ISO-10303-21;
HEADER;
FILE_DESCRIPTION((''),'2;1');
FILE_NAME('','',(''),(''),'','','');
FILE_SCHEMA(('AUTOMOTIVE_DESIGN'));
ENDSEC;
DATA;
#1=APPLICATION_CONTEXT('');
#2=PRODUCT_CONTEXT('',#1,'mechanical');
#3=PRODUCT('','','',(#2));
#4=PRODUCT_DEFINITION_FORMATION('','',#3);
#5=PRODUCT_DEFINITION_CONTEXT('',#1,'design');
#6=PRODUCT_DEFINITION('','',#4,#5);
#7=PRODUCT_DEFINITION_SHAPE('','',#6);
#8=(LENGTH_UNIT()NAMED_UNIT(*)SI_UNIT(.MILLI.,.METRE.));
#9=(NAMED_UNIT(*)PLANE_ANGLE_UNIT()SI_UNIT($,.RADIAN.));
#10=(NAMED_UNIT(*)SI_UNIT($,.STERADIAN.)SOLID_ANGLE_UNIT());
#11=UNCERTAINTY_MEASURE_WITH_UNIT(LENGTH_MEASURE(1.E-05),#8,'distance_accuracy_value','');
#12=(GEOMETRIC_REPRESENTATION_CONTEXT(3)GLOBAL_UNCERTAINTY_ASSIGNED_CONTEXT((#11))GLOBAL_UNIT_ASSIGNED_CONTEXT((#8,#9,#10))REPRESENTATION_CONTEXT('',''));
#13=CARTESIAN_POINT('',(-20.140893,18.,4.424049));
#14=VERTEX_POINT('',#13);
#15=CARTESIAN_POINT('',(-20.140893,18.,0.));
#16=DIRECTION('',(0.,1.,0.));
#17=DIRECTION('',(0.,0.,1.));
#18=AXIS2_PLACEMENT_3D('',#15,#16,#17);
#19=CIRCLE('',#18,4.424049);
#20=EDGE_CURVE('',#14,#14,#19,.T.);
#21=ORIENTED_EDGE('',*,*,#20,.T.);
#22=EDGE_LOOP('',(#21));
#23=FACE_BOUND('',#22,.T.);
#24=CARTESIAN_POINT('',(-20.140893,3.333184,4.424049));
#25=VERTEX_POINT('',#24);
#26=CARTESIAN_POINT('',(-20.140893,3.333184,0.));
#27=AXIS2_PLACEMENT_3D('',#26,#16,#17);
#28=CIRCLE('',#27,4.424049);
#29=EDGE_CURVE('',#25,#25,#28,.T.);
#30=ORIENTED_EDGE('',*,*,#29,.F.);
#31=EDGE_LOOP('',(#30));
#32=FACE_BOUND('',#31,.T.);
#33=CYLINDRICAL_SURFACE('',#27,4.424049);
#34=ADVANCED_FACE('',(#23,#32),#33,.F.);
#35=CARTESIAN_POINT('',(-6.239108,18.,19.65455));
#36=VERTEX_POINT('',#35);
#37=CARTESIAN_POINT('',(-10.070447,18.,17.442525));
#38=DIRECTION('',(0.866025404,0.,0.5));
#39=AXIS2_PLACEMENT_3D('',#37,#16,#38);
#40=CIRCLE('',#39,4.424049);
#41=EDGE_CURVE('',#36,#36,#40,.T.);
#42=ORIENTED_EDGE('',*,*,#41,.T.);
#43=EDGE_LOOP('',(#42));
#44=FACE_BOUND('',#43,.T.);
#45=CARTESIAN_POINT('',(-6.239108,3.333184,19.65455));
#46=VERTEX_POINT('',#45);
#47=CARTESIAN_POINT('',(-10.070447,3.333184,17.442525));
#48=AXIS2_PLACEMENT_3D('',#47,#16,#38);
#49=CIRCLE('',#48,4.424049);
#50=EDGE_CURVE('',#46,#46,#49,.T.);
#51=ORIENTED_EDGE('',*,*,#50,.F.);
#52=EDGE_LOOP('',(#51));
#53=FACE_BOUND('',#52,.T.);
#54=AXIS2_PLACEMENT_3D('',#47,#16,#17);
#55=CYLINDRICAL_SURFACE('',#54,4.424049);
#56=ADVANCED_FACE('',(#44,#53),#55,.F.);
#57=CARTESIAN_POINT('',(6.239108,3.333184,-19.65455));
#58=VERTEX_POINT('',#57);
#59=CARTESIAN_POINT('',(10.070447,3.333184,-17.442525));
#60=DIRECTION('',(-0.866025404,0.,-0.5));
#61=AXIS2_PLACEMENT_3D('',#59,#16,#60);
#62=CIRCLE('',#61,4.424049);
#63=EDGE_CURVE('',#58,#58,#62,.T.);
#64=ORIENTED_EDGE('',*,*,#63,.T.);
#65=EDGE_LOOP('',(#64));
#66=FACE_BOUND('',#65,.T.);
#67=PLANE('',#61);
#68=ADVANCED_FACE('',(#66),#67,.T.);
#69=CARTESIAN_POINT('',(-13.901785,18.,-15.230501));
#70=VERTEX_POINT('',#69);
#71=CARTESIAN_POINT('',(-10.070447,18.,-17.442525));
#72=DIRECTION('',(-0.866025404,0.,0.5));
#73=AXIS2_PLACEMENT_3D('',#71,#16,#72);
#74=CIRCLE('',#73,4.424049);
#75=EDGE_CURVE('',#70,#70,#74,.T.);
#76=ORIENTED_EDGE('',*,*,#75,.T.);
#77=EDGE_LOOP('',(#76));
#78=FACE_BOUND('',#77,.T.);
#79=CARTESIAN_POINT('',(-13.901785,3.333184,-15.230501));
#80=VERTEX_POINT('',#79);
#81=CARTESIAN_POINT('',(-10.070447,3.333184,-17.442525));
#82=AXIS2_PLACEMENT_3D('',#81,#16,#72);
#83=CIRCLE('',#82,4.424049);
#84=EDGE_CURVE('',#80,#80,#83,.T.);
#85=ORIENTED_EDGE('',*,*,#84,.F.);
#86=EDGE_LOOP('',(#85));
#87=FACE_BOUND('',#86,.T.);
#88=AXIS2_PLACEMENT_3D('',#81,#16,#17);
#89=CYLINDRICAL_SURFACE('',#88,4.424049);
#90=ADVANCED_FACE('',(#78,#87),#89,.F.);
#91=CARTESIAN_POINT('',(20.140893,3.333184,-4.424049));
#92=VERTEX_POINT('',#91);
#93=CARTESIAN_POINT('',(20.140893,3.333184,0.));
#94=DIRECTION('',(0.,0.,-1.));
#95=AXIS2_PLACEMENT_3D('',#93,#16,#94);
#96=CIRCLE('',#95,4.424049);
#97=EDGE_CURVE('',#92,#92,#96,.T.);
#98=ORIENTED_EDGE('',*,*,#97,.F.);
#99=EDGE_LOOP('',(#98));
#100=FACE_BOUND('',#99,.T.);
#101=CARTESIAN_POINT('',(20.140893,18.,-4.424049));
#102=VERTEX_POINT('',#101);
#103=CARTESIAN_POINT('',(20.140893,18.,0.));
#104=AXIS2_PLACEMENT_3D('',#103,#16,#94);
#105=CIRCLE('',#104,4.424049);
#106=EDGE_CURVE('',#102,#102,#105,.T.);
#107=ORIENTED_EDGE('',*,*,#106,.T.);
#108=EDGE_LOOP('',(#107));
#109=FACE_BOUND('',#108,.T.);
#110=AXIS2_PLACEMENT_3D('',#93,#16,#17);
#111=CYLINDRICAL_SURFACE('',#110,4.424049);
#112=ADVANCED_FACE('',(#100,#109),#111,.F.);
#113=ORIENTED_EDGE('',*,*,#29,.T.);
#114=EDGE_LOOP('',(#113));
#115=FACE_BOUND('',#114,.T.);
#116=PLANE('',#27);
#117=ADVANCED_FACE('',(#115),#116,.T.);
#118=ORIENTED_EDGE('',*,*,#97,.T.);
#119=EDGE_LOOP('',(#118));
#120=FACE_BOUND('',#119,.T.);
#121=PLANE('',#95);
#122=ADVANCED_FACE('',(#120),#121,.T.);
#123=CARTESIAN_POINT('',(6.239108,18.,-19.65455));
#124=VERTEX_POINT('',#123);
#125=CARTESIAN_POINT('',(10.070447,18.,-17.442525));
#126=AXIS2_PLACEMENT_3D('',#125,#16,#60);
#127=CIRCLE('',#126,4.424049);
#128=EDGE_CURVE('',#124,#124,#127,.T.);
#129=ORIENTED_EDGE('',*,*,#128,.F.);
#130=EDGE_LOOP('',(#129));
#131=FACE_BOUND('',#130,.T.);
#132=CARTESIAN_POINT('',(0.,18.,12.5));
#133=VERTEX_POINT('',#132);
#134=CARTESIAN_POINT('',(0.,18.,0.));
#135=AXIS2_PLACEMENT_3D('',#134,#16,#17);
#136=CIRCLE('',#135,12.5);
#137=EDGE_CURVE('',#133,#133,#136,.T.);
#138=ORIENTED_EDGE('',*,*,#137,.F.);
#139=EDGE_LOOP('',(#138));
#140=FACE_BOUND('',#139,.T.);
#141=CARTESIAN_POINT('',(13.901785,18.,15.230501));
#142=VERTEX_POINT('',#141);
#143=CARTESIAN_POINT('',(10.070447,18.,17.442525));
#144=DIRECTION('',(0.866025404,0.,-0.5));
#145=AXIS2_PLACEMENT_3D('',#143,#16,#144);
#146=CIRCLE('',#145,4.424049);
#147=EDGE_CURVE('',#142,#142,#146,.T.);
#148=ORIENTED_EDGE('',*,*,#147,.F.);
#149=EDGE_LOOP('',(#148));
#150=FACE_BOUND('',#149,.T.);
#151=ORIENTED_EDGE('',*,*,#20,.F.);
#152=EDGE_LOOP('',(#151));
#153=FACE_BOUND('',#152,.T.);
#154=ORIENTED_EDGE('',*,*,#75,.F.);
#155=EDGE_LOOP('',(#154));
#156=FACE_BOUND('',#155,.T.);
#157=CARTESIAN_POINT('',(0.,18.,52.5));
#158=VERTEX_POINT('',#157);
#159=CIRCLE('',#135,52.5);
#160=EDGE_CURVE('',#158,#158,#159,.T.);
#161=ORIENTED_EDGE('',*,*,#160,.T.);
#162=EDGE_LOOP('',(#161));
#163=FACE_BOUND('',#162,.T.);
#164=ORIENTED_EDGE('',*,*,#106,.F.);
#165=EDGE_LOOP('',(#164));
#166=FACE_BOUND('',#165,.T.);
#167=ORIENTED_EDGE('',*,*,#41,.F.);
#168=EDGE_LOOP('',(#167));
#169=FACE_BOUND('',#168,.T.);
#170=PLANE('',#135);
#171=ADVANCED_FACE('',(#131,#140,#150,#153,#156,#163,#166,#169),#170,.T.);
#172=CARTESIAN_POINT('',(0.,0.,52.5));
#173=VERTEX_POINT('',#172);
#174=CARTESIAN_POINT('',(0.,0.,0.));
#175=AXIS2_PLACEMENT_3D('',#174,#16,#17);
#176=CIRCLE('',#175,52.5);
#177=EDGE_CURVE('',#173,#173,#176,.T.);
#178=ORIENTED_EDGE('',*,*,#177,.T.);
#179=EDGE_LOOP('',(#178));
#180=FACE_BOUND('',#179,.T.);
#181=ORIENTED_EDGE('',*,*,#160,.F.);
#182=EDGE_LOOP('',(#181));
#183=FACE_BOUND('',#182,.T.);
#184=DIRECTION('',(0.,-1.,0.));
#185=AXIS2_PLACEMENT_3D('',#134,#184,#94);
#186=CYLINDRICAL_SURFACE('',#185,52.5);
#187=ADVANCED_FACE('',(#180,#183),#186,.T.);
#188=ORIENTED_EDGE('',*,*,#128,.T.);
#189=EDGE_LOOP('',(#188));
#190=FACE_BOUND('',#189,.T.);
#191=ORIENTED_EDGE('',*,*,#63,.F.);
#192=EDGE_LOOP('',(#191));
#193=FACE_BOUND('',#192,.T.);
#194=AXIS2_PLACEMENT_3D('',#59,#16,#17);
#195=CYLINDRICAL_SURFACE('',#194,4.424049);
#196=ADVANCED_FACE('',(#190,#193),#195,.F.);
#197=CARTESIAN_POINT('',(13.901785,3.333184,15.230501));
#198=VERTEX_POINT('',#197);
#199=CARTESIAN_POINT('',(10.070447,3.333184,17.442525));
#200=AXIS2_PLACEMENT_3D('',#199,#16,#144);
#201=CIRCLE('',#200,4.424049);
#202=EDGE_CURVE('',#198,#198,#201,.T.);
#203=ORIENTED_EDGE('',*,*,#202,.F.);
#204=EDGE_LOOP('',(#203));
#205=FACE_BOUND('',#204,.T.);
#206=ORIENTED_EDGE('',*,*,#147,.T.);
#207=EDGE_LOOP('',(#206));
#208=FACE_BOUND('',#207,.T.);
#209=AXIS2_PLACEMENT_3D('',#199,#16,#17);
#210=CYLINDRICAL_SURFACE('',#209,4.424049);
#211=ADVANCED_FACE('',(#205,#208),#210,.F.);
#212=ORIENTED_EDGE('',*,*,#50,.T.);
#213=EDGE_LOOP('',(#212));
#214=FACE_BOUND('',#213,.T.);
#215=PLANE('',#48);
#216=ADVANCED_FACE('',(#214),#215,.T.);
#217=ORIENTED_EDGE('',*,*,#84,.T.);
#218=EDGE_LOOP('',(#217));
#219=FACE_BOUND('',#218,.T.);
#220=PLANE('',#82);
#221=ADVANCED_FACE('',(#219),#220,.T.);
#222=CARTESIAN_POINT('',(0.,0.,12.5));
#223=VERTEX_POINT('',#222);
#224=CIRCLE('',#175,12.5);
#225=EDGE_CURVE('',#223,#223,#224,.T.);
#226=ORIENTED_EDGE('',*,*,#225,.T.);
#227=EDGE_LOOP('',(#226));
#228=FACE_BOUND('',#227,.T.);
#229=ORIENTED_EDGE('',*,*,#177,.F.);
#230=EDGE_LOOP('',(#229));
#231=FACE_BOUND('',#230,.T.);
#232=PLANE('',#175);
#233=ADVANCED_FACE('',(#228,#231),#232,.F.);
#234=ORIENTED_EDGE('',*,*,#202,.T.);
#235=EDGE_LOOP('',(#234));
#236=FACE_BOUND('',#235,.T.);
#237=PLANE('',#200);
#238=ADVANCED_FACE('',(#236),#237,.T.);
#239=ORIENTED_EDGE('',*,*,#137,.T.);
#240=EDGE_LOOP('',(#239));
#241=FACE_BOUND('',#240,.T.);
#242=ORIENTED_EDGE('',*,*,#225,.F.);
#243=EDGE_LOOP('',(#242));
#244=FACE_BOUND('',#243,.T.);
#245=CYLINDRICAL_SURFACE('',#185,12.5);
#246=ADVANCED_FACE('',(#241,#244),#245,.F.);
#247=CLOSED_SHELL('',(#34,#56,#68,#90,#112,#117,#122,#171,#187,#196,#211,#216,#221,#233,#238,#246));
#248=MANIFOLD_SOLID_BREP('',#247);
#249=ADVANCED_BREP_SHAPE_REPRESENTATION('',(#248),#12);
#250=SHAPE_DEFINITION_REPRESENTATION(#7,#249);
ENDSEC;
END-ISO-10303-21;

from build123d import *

# Parameters (mm, degrees)
SKETCH1_R           = 52.5
BOSS_EXTRUDE1_DEPTH = 18
SKETCH2_R           = 12.5
CUT_EXTRUDE1_DEPTH  = 77.396989469
SKETCH3_R           = 4.424048946
CUT_EXTRUDE2_DEPTH  = 14.666816431
CIRPATTERN1_COUNT   = 6


with BuildPart() as part:
    # Sketch1 → Boss-Extrude1 (new body)
    with BuildSketch(Plane(origin=(0, 0, 0), x_dir=(1, 0, 0), z_dir=(0, 1, 0))):
        Circle(SKETCH1_R)
    extrude(amount=BOSS_EXTRUDE1_DEPTH)

    # Sketch2 → Cut-Extrude1 (cut, through all)
    with BuildSketch(Plane(origin=(0, 0, 0), x_dir=(1, 0, 0), z_dir=(0, 1, 0))):
        Circle(SKETCH2_R)
    extrude(amount=CUT_EXTRUDE1_DEPTH, mode=Mode.SUBTRACT)

    # Sketch3 → Cut-Extrude2 (cut)
    with BuildSketch(Plane(origin=(0, 18, 0), x_dir=(1, 0, 0), z_dir=(0, 1, 0))):
        with Locations((-20.140893143, 0)):
            Circle(SKETCH3_R)
    cut_extrude2 = extrude(amount=-CUT_EXTRUDE2_DEPTH, mode=Mode.SUBTRACT)

    # CirPattern1: Cut-Extrude2 ×6 about axis
    cirpattern1_axis = Axis((0, 0, 0), (0, 1, 0))
    for i in range(1, CIRPATTERN1_COUNT):
        add(cut_extrude2.rotate(cirpattern1_axis, i * 360 / CIRPATTERN1_COUNT), mode=Mode.SUBTRACT)


solid = part.part
